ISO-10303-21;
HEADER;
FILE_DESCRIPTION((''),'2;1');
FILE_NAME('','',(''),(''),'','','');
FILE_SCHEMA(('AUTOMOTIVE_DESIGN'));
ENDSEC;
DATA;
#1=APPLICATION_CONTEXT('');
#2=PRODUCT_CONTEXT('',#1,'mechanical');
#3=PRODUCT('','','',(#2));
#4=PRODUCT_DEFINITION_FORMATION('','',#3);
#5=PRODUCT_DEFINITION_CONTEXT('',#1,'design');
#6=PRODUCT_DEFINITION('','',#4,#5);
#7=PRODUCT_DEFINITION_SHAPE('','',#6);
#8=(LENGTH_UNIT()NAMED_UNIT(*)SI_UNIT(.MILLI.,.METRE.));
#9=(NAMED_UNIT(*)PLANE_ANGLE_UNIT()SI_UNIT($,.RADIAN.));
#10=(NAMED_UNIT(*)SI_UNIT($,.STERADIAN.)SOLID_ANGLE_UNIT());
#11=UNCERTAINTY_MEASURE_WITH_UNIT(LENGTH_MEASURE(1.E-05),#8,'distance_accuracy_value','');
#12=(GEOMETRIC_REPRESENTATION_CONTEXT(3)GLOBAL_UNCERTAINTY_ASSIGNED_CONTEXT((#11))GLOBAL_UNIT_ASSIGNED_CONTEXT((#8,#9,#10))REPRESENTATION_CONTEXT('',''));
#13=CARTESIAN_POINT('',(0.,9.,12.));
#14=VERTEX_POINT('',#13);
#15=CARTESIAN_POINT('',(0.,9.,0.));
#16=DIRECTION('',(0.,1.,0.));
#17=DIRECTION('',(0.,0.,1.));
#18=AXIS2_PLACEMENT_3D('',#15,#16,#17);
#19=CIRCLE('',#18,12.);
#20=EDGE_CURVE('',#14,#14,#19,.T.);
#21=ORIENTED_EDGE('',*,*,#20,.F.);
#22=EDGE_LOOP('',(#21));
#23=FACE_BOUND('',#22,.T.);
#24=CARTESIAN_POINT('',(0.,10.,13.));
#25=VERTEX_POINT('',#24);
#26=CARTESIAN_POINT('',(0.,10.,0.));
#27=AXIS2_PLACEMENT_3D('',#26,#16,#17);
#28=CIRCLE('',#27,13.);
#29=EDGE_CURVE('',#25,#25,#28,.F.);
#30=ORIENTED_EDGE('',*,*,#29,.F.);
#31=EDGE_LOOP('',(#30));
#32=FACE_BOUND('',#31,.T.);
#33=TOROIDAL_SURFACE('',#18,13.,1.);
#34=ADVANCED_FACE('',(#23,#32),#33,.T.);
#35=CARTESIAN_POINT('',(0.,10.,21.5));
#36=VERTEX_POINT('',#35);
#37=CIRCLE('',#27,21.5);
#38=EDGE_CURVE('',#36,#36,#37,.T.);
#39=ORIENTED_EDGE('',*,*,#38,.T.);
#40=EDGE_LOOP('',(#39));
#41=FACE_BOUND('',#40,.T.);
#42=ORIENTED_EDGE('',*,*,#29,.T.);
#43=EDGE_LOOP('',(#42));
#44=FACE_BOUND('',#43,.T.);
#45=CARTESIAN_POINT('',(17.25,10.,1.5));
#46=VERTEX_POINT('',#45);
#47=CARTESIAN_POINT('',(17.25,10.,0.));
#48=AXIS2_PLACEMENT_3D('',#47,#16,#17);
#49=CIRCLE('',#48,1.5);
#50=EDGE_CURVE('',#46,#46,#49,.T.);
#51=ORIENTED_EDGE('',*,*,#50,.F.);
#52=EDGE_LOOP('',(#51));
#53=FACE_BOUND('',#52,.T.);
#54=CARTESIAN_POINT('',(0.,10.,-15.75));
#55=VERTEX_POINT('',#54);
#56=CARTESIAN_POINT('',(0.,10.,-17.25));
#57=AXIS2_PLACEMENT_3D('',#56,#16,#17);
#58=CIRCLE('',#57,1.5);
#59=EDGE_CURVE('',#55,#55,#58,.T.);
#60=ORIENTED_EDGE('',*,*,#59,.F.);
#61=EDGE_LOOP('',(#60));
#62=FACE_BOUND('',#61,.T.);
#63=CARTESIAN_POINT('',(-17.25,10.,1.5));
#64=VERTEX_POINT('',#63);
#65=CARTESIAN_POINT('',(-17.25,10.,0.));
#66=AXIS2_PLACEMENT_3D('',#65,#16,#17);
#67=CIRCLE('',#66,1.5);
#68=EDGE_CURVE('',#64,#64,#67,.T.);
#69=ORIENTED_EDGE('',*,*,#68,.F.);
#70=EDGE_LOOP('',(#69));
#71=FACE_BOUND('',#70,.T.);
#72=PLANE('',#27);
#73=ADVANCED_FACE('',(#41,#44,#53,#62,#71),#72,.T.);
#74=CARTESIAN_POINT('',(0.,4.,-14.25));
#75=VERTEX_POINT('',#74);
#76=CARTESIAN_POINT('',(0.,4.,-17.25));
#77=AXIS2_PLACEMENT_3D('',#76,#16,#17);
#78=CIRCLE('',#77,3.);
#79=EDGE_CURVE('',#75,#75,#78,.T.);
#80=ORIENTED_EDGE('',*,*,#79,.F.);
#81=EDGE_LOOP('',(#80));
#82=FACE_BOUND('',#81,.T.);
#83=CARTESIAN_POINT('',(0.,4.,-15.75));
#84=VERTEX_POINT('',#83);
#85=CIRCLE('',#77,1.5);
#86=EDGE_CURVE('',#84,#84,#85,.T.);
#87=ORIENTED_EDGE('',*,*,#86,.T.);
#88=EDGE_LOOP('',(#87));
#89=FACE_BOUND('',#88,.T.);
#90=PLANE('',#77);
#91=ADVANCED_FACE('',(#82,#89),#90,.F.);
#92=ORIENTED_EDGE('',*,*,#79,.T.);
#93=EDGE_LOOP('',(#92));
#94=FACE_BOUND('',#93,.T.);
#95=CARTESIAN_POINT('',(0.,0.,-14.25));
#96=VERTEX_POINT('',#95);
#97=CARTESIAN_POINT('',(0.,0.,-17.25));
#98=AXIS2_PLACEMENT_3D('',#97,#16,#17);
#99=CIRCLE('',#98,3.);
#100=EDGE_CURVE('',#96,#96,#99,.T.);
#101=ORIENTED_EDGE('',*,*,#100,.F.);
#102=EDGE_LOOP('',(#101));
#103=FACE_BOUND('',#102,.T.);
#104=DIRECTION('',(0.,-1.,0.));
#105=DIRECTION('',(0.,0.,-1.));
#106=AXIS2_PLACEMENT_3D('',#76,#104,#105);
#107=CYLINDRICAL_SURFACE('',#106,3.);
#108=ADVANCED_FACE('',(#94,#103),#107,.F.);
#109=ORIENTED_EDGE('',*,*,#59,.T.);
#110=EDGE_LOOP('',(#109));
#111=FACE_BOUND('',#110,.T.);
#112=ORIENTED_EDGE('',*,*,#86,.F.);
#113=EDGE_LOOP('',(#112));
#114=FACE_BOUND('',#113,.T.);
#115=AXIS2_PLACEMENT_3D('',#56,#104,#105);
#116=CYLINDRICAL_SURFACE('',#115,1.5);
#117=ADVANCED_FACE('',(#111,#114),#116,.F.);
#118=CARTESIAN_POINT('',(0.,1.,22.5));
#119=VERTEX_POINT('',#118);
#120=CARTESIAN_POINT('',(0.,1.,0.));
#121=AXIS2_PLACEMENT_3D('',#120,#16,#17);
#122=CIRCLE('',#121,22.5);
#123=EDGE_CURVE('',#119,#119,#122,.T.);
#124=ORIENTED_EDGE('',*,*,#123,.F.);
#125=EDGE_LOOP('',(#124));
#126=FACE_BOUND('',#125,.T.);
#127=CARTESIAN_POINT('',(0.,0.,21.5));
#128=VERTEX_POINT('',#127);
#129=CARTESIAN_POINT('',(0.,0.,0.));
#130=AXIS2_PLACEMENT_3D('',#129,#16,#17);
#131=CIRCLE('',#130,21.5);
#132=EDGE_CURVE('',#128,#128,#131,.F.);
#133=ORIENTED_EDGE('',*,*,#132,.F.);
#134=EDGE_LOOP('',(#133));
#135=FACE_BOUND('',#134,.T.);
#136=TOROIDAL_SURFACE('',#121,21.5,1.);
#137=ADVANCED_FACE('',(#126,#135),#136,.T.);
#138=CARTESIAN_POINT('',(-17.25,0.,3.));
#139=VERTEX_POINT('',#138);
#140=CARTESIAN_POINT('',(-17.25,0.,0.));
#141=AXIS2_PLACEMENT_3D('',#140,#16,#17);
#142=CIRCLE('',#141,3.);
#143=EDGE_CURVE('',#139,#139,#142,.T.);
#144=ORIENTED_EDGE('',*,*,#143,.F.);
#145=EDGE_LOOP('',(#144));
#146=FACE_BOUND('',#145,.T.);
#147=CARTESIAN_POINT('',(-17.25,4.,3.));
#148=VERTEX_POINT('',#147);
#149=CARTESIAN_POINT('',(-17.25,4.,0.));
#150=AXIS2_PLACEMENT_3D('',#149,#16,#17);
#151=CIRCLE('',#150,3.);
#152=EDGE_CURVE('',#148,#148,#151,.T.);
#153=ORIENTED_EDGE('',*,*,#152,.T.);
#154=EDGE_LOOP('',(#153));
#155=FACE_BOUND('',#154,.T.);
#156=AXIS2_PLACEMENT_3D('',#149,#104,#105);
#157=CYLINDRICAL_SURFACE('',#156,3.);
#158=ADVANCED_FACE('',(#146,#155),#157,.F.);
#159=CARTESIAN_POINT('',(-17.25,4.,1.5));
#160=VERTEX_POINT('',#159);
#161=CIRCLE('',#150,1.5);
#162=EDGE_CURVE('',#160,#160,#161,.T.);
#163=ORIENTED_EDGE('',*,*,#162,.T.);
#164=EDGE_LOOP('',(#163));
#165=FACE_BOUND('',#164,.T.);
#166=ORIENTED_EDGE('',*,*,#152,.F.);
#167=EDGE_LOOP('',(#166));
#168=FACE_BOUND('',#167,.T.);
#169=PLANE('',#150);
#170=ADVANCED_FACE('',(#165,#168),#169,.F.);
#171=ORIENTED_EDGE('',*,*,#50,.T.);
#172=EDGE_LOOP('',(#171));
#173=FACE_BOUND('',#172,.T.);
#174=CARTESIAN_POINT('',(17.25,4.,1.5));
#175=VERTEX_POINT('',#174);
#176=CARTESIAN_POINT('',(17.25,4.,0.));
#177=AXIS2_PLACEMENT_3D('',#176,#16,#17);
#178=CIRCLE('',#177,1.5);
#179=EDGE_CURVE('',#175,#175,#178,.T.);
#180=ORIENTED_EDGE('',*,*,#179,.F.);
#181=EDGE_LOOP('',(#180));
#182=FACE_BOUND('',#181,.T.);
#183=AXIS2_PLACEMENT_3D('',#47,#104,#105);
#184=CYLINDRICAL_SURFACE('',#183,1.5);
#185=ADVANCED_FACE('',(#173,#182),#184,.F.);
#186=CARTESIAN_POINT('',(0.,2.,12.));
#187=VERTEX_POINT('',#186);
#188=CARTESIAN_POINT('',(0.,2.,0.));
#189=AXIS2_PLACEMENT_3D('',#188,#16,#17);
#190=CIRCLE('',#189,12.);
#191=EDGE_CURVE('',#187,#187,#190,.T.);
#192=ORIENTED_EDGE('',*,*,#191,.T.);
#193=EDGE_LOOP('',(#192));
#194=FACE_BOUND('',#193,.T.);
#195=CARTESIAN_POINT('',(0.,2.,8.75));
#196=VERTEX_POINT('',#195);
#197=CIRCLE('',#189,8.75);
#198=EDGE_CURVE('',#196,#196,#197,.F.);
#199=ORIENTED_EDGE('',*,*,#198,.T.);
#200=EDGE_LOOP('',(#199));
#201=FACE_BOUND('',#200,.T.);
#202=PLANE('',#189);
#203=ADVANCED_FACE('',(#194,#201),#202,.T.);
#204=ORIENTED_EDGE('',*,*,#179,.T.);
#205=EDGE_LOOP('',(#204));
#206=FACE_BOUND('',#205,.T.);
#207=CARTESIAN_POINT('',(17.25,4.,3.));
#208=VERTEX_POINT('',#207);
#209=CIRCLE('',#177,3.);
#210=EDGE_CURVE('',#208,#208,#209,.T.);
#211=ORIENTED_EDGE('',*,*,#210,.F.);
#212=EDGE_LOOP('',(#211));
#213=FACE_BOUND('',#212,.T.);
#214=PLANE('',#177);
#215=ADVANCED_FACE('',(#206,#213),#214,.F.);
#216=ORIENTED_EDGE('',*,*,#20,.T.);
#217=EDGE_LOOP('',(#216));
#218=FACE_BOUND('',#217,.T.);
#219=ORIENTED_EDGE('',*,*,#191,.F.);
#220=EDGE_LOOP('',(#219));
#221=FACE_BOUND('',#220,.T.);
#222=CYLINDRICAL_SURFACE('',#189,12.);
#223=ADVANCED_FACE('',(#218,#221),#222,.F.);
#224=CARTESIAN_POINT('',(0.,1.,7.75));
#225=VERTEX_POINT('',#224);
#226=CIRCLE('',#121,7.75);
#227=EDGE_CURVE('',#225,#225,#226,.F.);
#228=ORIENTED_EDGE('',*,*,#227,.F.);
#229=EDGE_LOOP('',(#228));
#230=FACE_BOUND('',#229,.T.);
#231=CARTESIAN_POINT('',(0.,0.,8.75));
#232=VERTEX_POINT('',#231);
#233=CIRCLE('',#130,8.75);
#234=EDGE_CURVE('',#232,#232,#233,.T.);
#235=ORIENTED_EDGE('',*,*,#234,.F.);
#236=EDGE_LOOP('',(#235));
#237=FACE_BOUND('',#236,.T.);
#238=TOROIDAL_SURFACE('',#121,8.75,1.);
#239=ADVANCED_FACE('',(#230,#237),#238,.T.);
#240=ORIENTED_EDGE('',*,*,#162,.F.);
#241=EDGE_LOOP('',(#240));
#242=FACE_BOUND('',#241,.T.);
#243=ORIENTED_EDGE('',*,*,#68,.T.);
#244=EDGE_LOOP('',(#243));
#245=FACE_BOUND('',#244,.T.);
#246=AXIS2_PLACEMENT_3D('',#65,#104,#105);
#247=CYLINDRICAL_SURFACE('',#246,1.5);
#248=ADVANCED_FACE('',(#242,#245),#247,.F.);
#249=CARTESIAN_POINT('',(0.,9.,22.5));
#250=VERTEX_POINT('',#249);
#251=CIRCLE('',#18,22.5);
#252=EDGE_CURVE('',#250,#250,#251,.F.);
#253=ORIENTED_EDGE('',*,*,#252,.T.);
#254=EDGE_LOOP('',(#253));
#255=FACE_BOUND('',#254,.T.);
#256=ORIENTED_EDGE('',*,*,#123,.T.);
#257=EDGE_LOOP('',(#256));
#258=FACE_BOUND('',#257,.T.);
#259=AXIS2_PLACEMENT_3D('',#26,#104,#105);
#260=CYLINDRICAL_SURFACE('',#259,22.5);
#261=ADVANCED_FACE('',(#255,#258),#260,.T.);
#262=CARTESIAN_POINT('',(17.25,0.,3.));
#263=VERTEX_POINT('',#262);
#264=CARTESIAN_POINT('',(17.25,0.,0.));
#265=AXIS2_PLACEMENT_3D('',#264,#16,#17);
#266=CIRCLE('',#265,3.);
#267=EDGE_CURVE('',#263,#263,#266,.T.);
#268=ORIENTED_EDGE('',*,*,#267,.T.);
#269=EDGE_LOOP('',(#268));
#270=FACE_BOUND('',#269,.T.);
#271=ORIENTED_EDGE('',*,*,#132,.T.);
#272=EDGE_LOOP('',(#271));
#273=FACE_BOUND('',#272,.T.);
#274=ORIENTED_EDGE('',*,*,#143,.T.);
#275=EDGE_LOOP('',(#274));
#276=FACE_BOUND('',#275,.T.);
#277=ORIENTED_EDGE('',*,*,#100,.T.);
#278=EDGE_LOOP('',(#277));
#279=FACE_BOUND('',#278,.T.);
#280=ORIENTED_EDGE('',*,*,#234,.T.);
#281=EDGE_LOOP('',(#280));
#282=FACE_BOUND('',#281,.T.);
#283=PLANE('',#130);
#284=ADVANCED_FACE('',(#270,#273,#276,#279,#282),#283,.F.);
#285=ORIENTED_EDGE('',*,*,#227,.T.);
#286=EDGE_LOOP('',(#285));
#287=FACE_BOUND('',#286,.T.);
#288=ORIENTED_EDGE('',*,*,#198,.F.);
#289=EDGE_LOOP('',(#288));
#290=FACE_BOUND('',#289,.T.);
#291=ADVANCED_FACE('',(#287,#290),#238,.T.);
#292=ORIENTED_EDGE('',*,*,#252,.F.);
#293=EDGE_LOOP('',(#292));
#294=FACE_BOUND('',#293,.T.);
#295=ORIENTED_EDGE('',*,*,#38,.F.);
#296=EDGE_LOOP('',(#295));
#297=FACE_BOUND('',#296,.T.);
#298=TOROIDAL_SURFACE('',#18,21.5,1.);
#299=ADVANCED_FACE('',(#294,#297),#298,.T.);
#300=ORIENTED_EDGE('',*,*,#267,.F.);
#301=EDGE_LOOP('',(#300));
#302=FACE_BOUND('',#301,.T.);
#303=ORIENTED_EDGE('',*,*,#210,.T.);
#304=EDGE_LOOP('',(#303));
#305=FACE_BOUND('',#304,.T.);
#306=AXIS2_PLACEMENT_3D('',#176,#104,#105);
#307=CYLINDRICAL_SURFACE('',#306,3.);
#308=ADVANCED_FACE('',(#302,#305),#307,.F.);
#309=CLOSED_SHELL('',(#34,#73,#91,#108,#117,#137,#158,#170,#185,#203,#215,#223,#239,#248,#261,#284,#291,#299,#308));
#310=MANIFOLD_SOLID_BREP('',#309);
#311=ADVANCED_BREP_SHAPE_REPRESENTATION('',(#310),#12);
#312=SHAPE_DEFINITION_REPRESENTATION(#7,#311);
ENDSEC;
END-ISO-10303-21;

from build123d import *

# Parameters (mm, degrees)
SKETCH1_R           = 22.5
SKETCH1_R_2         = 1.5
BOSS_EXTRUDE1_DEPTH = 10
SKETCH2_R           = 12
CUT_EXTRUDE1_DEPTH  = 8
SKETCH3_R           = 7.75
CUT_EXTRUDE2_DEPTH  = 8
FILLET1_R           = 1
SKETCH4_R           = 3
CUT_EXTRUDE4_DEPTH  = 4


with BuildPart() as part:
    # Sketch1 → Boss-Extrude1 (new body)
    with BuildSketch(Plane(origin=(0, 0, 0), x_dir=(1, 0, 0), z_dir=(0, 1, 0))):
        with Locations(Location((0, 0, 0), (0, 0, 270))):
            Circle(SKETCH1_R)
        with Locations(Location((-17.25, 0, 0), (0, 0, 270))):
            Circle(SKETCH1_R_2, mode=Mode.SUBTRACT)
        with Locations(Location((0, 17.25, 0), (0, 0, 270))):
            Circle(SKETCH1_R_2, mode=Mode.SUBTRACT)
        with Locations(Location((17.25, 0, 0), (0, 0, 270))):
            Circle(SKETCH1_R_2, mode=Mode.SUBTRACT)
    extrude(amount=BOSS_EXTRUDE1_DEPTH)

    # Sketch2 → Cut-Extrude1 (cut)
    with BuildSketch(Plane(origin=(0, 10, 0), x_dir=(1, 0, 0), z_dir=(0, 1, 0))):
        with Locations(Location((0, 0, 0), (0, 0, 270))):
            Circle(SKETCH2_R)
    extrude(amount=-CUT_EXTRUDE1_DEPTH, mode=Mode.SUBTRACT)

    # Sketch3 → Cut-Extrude2 (cut)
    with BuildSketch(Plane(origin=(0, 2, 0), x_dir=(1, 0, 0), z_dir=(0, 1, 0))):
        with Locations(Location((0, 0, 0), (0, 0, 270))):
            Circle(SKETCH3_R)
    extrude(amount=-CUT_EXTRUDE2_DEPTH, mode=Mode.SUBTRACT)

    # Fillet1
    fillet1_edges = [part.edges().sort_by_distance(p)[0] for p in [
        (0, 10, -12),
        (0, 0, -7.75),
        (0, 2, -7.75),
        (0, 10, -22.5),
        (0, 0, -22.5),
    ]]
    fillet(fillet1_edges, radius=FILLET1_R - 0.0001)  # a hair under: the kernel refuses the full size

    # Sketch4 → Cut-Extrude4 (cut)
    with BuildSketch(Plane(origin=(0, 0, 0), x_dir=(1, 0, 0), z_dir=(0, 1, 0))):
        with Locations(Location((-17.25, 0, 0), (0, 0, 270))):
            Circle(SKETCH4_R)
        with Locations(Location((0, 17.25, 0), (0, 0, 270))):
            Circle(SKETCH4_R)
        with Locations(Location((17.25, 0, 0), (0, 0, 270))):
            Circle(SKETCH4_R)
    extrude(amount=CUT_EXTRUDE4_DEPTH, mode=Mode.SUBTRACT)


solid = part.part
